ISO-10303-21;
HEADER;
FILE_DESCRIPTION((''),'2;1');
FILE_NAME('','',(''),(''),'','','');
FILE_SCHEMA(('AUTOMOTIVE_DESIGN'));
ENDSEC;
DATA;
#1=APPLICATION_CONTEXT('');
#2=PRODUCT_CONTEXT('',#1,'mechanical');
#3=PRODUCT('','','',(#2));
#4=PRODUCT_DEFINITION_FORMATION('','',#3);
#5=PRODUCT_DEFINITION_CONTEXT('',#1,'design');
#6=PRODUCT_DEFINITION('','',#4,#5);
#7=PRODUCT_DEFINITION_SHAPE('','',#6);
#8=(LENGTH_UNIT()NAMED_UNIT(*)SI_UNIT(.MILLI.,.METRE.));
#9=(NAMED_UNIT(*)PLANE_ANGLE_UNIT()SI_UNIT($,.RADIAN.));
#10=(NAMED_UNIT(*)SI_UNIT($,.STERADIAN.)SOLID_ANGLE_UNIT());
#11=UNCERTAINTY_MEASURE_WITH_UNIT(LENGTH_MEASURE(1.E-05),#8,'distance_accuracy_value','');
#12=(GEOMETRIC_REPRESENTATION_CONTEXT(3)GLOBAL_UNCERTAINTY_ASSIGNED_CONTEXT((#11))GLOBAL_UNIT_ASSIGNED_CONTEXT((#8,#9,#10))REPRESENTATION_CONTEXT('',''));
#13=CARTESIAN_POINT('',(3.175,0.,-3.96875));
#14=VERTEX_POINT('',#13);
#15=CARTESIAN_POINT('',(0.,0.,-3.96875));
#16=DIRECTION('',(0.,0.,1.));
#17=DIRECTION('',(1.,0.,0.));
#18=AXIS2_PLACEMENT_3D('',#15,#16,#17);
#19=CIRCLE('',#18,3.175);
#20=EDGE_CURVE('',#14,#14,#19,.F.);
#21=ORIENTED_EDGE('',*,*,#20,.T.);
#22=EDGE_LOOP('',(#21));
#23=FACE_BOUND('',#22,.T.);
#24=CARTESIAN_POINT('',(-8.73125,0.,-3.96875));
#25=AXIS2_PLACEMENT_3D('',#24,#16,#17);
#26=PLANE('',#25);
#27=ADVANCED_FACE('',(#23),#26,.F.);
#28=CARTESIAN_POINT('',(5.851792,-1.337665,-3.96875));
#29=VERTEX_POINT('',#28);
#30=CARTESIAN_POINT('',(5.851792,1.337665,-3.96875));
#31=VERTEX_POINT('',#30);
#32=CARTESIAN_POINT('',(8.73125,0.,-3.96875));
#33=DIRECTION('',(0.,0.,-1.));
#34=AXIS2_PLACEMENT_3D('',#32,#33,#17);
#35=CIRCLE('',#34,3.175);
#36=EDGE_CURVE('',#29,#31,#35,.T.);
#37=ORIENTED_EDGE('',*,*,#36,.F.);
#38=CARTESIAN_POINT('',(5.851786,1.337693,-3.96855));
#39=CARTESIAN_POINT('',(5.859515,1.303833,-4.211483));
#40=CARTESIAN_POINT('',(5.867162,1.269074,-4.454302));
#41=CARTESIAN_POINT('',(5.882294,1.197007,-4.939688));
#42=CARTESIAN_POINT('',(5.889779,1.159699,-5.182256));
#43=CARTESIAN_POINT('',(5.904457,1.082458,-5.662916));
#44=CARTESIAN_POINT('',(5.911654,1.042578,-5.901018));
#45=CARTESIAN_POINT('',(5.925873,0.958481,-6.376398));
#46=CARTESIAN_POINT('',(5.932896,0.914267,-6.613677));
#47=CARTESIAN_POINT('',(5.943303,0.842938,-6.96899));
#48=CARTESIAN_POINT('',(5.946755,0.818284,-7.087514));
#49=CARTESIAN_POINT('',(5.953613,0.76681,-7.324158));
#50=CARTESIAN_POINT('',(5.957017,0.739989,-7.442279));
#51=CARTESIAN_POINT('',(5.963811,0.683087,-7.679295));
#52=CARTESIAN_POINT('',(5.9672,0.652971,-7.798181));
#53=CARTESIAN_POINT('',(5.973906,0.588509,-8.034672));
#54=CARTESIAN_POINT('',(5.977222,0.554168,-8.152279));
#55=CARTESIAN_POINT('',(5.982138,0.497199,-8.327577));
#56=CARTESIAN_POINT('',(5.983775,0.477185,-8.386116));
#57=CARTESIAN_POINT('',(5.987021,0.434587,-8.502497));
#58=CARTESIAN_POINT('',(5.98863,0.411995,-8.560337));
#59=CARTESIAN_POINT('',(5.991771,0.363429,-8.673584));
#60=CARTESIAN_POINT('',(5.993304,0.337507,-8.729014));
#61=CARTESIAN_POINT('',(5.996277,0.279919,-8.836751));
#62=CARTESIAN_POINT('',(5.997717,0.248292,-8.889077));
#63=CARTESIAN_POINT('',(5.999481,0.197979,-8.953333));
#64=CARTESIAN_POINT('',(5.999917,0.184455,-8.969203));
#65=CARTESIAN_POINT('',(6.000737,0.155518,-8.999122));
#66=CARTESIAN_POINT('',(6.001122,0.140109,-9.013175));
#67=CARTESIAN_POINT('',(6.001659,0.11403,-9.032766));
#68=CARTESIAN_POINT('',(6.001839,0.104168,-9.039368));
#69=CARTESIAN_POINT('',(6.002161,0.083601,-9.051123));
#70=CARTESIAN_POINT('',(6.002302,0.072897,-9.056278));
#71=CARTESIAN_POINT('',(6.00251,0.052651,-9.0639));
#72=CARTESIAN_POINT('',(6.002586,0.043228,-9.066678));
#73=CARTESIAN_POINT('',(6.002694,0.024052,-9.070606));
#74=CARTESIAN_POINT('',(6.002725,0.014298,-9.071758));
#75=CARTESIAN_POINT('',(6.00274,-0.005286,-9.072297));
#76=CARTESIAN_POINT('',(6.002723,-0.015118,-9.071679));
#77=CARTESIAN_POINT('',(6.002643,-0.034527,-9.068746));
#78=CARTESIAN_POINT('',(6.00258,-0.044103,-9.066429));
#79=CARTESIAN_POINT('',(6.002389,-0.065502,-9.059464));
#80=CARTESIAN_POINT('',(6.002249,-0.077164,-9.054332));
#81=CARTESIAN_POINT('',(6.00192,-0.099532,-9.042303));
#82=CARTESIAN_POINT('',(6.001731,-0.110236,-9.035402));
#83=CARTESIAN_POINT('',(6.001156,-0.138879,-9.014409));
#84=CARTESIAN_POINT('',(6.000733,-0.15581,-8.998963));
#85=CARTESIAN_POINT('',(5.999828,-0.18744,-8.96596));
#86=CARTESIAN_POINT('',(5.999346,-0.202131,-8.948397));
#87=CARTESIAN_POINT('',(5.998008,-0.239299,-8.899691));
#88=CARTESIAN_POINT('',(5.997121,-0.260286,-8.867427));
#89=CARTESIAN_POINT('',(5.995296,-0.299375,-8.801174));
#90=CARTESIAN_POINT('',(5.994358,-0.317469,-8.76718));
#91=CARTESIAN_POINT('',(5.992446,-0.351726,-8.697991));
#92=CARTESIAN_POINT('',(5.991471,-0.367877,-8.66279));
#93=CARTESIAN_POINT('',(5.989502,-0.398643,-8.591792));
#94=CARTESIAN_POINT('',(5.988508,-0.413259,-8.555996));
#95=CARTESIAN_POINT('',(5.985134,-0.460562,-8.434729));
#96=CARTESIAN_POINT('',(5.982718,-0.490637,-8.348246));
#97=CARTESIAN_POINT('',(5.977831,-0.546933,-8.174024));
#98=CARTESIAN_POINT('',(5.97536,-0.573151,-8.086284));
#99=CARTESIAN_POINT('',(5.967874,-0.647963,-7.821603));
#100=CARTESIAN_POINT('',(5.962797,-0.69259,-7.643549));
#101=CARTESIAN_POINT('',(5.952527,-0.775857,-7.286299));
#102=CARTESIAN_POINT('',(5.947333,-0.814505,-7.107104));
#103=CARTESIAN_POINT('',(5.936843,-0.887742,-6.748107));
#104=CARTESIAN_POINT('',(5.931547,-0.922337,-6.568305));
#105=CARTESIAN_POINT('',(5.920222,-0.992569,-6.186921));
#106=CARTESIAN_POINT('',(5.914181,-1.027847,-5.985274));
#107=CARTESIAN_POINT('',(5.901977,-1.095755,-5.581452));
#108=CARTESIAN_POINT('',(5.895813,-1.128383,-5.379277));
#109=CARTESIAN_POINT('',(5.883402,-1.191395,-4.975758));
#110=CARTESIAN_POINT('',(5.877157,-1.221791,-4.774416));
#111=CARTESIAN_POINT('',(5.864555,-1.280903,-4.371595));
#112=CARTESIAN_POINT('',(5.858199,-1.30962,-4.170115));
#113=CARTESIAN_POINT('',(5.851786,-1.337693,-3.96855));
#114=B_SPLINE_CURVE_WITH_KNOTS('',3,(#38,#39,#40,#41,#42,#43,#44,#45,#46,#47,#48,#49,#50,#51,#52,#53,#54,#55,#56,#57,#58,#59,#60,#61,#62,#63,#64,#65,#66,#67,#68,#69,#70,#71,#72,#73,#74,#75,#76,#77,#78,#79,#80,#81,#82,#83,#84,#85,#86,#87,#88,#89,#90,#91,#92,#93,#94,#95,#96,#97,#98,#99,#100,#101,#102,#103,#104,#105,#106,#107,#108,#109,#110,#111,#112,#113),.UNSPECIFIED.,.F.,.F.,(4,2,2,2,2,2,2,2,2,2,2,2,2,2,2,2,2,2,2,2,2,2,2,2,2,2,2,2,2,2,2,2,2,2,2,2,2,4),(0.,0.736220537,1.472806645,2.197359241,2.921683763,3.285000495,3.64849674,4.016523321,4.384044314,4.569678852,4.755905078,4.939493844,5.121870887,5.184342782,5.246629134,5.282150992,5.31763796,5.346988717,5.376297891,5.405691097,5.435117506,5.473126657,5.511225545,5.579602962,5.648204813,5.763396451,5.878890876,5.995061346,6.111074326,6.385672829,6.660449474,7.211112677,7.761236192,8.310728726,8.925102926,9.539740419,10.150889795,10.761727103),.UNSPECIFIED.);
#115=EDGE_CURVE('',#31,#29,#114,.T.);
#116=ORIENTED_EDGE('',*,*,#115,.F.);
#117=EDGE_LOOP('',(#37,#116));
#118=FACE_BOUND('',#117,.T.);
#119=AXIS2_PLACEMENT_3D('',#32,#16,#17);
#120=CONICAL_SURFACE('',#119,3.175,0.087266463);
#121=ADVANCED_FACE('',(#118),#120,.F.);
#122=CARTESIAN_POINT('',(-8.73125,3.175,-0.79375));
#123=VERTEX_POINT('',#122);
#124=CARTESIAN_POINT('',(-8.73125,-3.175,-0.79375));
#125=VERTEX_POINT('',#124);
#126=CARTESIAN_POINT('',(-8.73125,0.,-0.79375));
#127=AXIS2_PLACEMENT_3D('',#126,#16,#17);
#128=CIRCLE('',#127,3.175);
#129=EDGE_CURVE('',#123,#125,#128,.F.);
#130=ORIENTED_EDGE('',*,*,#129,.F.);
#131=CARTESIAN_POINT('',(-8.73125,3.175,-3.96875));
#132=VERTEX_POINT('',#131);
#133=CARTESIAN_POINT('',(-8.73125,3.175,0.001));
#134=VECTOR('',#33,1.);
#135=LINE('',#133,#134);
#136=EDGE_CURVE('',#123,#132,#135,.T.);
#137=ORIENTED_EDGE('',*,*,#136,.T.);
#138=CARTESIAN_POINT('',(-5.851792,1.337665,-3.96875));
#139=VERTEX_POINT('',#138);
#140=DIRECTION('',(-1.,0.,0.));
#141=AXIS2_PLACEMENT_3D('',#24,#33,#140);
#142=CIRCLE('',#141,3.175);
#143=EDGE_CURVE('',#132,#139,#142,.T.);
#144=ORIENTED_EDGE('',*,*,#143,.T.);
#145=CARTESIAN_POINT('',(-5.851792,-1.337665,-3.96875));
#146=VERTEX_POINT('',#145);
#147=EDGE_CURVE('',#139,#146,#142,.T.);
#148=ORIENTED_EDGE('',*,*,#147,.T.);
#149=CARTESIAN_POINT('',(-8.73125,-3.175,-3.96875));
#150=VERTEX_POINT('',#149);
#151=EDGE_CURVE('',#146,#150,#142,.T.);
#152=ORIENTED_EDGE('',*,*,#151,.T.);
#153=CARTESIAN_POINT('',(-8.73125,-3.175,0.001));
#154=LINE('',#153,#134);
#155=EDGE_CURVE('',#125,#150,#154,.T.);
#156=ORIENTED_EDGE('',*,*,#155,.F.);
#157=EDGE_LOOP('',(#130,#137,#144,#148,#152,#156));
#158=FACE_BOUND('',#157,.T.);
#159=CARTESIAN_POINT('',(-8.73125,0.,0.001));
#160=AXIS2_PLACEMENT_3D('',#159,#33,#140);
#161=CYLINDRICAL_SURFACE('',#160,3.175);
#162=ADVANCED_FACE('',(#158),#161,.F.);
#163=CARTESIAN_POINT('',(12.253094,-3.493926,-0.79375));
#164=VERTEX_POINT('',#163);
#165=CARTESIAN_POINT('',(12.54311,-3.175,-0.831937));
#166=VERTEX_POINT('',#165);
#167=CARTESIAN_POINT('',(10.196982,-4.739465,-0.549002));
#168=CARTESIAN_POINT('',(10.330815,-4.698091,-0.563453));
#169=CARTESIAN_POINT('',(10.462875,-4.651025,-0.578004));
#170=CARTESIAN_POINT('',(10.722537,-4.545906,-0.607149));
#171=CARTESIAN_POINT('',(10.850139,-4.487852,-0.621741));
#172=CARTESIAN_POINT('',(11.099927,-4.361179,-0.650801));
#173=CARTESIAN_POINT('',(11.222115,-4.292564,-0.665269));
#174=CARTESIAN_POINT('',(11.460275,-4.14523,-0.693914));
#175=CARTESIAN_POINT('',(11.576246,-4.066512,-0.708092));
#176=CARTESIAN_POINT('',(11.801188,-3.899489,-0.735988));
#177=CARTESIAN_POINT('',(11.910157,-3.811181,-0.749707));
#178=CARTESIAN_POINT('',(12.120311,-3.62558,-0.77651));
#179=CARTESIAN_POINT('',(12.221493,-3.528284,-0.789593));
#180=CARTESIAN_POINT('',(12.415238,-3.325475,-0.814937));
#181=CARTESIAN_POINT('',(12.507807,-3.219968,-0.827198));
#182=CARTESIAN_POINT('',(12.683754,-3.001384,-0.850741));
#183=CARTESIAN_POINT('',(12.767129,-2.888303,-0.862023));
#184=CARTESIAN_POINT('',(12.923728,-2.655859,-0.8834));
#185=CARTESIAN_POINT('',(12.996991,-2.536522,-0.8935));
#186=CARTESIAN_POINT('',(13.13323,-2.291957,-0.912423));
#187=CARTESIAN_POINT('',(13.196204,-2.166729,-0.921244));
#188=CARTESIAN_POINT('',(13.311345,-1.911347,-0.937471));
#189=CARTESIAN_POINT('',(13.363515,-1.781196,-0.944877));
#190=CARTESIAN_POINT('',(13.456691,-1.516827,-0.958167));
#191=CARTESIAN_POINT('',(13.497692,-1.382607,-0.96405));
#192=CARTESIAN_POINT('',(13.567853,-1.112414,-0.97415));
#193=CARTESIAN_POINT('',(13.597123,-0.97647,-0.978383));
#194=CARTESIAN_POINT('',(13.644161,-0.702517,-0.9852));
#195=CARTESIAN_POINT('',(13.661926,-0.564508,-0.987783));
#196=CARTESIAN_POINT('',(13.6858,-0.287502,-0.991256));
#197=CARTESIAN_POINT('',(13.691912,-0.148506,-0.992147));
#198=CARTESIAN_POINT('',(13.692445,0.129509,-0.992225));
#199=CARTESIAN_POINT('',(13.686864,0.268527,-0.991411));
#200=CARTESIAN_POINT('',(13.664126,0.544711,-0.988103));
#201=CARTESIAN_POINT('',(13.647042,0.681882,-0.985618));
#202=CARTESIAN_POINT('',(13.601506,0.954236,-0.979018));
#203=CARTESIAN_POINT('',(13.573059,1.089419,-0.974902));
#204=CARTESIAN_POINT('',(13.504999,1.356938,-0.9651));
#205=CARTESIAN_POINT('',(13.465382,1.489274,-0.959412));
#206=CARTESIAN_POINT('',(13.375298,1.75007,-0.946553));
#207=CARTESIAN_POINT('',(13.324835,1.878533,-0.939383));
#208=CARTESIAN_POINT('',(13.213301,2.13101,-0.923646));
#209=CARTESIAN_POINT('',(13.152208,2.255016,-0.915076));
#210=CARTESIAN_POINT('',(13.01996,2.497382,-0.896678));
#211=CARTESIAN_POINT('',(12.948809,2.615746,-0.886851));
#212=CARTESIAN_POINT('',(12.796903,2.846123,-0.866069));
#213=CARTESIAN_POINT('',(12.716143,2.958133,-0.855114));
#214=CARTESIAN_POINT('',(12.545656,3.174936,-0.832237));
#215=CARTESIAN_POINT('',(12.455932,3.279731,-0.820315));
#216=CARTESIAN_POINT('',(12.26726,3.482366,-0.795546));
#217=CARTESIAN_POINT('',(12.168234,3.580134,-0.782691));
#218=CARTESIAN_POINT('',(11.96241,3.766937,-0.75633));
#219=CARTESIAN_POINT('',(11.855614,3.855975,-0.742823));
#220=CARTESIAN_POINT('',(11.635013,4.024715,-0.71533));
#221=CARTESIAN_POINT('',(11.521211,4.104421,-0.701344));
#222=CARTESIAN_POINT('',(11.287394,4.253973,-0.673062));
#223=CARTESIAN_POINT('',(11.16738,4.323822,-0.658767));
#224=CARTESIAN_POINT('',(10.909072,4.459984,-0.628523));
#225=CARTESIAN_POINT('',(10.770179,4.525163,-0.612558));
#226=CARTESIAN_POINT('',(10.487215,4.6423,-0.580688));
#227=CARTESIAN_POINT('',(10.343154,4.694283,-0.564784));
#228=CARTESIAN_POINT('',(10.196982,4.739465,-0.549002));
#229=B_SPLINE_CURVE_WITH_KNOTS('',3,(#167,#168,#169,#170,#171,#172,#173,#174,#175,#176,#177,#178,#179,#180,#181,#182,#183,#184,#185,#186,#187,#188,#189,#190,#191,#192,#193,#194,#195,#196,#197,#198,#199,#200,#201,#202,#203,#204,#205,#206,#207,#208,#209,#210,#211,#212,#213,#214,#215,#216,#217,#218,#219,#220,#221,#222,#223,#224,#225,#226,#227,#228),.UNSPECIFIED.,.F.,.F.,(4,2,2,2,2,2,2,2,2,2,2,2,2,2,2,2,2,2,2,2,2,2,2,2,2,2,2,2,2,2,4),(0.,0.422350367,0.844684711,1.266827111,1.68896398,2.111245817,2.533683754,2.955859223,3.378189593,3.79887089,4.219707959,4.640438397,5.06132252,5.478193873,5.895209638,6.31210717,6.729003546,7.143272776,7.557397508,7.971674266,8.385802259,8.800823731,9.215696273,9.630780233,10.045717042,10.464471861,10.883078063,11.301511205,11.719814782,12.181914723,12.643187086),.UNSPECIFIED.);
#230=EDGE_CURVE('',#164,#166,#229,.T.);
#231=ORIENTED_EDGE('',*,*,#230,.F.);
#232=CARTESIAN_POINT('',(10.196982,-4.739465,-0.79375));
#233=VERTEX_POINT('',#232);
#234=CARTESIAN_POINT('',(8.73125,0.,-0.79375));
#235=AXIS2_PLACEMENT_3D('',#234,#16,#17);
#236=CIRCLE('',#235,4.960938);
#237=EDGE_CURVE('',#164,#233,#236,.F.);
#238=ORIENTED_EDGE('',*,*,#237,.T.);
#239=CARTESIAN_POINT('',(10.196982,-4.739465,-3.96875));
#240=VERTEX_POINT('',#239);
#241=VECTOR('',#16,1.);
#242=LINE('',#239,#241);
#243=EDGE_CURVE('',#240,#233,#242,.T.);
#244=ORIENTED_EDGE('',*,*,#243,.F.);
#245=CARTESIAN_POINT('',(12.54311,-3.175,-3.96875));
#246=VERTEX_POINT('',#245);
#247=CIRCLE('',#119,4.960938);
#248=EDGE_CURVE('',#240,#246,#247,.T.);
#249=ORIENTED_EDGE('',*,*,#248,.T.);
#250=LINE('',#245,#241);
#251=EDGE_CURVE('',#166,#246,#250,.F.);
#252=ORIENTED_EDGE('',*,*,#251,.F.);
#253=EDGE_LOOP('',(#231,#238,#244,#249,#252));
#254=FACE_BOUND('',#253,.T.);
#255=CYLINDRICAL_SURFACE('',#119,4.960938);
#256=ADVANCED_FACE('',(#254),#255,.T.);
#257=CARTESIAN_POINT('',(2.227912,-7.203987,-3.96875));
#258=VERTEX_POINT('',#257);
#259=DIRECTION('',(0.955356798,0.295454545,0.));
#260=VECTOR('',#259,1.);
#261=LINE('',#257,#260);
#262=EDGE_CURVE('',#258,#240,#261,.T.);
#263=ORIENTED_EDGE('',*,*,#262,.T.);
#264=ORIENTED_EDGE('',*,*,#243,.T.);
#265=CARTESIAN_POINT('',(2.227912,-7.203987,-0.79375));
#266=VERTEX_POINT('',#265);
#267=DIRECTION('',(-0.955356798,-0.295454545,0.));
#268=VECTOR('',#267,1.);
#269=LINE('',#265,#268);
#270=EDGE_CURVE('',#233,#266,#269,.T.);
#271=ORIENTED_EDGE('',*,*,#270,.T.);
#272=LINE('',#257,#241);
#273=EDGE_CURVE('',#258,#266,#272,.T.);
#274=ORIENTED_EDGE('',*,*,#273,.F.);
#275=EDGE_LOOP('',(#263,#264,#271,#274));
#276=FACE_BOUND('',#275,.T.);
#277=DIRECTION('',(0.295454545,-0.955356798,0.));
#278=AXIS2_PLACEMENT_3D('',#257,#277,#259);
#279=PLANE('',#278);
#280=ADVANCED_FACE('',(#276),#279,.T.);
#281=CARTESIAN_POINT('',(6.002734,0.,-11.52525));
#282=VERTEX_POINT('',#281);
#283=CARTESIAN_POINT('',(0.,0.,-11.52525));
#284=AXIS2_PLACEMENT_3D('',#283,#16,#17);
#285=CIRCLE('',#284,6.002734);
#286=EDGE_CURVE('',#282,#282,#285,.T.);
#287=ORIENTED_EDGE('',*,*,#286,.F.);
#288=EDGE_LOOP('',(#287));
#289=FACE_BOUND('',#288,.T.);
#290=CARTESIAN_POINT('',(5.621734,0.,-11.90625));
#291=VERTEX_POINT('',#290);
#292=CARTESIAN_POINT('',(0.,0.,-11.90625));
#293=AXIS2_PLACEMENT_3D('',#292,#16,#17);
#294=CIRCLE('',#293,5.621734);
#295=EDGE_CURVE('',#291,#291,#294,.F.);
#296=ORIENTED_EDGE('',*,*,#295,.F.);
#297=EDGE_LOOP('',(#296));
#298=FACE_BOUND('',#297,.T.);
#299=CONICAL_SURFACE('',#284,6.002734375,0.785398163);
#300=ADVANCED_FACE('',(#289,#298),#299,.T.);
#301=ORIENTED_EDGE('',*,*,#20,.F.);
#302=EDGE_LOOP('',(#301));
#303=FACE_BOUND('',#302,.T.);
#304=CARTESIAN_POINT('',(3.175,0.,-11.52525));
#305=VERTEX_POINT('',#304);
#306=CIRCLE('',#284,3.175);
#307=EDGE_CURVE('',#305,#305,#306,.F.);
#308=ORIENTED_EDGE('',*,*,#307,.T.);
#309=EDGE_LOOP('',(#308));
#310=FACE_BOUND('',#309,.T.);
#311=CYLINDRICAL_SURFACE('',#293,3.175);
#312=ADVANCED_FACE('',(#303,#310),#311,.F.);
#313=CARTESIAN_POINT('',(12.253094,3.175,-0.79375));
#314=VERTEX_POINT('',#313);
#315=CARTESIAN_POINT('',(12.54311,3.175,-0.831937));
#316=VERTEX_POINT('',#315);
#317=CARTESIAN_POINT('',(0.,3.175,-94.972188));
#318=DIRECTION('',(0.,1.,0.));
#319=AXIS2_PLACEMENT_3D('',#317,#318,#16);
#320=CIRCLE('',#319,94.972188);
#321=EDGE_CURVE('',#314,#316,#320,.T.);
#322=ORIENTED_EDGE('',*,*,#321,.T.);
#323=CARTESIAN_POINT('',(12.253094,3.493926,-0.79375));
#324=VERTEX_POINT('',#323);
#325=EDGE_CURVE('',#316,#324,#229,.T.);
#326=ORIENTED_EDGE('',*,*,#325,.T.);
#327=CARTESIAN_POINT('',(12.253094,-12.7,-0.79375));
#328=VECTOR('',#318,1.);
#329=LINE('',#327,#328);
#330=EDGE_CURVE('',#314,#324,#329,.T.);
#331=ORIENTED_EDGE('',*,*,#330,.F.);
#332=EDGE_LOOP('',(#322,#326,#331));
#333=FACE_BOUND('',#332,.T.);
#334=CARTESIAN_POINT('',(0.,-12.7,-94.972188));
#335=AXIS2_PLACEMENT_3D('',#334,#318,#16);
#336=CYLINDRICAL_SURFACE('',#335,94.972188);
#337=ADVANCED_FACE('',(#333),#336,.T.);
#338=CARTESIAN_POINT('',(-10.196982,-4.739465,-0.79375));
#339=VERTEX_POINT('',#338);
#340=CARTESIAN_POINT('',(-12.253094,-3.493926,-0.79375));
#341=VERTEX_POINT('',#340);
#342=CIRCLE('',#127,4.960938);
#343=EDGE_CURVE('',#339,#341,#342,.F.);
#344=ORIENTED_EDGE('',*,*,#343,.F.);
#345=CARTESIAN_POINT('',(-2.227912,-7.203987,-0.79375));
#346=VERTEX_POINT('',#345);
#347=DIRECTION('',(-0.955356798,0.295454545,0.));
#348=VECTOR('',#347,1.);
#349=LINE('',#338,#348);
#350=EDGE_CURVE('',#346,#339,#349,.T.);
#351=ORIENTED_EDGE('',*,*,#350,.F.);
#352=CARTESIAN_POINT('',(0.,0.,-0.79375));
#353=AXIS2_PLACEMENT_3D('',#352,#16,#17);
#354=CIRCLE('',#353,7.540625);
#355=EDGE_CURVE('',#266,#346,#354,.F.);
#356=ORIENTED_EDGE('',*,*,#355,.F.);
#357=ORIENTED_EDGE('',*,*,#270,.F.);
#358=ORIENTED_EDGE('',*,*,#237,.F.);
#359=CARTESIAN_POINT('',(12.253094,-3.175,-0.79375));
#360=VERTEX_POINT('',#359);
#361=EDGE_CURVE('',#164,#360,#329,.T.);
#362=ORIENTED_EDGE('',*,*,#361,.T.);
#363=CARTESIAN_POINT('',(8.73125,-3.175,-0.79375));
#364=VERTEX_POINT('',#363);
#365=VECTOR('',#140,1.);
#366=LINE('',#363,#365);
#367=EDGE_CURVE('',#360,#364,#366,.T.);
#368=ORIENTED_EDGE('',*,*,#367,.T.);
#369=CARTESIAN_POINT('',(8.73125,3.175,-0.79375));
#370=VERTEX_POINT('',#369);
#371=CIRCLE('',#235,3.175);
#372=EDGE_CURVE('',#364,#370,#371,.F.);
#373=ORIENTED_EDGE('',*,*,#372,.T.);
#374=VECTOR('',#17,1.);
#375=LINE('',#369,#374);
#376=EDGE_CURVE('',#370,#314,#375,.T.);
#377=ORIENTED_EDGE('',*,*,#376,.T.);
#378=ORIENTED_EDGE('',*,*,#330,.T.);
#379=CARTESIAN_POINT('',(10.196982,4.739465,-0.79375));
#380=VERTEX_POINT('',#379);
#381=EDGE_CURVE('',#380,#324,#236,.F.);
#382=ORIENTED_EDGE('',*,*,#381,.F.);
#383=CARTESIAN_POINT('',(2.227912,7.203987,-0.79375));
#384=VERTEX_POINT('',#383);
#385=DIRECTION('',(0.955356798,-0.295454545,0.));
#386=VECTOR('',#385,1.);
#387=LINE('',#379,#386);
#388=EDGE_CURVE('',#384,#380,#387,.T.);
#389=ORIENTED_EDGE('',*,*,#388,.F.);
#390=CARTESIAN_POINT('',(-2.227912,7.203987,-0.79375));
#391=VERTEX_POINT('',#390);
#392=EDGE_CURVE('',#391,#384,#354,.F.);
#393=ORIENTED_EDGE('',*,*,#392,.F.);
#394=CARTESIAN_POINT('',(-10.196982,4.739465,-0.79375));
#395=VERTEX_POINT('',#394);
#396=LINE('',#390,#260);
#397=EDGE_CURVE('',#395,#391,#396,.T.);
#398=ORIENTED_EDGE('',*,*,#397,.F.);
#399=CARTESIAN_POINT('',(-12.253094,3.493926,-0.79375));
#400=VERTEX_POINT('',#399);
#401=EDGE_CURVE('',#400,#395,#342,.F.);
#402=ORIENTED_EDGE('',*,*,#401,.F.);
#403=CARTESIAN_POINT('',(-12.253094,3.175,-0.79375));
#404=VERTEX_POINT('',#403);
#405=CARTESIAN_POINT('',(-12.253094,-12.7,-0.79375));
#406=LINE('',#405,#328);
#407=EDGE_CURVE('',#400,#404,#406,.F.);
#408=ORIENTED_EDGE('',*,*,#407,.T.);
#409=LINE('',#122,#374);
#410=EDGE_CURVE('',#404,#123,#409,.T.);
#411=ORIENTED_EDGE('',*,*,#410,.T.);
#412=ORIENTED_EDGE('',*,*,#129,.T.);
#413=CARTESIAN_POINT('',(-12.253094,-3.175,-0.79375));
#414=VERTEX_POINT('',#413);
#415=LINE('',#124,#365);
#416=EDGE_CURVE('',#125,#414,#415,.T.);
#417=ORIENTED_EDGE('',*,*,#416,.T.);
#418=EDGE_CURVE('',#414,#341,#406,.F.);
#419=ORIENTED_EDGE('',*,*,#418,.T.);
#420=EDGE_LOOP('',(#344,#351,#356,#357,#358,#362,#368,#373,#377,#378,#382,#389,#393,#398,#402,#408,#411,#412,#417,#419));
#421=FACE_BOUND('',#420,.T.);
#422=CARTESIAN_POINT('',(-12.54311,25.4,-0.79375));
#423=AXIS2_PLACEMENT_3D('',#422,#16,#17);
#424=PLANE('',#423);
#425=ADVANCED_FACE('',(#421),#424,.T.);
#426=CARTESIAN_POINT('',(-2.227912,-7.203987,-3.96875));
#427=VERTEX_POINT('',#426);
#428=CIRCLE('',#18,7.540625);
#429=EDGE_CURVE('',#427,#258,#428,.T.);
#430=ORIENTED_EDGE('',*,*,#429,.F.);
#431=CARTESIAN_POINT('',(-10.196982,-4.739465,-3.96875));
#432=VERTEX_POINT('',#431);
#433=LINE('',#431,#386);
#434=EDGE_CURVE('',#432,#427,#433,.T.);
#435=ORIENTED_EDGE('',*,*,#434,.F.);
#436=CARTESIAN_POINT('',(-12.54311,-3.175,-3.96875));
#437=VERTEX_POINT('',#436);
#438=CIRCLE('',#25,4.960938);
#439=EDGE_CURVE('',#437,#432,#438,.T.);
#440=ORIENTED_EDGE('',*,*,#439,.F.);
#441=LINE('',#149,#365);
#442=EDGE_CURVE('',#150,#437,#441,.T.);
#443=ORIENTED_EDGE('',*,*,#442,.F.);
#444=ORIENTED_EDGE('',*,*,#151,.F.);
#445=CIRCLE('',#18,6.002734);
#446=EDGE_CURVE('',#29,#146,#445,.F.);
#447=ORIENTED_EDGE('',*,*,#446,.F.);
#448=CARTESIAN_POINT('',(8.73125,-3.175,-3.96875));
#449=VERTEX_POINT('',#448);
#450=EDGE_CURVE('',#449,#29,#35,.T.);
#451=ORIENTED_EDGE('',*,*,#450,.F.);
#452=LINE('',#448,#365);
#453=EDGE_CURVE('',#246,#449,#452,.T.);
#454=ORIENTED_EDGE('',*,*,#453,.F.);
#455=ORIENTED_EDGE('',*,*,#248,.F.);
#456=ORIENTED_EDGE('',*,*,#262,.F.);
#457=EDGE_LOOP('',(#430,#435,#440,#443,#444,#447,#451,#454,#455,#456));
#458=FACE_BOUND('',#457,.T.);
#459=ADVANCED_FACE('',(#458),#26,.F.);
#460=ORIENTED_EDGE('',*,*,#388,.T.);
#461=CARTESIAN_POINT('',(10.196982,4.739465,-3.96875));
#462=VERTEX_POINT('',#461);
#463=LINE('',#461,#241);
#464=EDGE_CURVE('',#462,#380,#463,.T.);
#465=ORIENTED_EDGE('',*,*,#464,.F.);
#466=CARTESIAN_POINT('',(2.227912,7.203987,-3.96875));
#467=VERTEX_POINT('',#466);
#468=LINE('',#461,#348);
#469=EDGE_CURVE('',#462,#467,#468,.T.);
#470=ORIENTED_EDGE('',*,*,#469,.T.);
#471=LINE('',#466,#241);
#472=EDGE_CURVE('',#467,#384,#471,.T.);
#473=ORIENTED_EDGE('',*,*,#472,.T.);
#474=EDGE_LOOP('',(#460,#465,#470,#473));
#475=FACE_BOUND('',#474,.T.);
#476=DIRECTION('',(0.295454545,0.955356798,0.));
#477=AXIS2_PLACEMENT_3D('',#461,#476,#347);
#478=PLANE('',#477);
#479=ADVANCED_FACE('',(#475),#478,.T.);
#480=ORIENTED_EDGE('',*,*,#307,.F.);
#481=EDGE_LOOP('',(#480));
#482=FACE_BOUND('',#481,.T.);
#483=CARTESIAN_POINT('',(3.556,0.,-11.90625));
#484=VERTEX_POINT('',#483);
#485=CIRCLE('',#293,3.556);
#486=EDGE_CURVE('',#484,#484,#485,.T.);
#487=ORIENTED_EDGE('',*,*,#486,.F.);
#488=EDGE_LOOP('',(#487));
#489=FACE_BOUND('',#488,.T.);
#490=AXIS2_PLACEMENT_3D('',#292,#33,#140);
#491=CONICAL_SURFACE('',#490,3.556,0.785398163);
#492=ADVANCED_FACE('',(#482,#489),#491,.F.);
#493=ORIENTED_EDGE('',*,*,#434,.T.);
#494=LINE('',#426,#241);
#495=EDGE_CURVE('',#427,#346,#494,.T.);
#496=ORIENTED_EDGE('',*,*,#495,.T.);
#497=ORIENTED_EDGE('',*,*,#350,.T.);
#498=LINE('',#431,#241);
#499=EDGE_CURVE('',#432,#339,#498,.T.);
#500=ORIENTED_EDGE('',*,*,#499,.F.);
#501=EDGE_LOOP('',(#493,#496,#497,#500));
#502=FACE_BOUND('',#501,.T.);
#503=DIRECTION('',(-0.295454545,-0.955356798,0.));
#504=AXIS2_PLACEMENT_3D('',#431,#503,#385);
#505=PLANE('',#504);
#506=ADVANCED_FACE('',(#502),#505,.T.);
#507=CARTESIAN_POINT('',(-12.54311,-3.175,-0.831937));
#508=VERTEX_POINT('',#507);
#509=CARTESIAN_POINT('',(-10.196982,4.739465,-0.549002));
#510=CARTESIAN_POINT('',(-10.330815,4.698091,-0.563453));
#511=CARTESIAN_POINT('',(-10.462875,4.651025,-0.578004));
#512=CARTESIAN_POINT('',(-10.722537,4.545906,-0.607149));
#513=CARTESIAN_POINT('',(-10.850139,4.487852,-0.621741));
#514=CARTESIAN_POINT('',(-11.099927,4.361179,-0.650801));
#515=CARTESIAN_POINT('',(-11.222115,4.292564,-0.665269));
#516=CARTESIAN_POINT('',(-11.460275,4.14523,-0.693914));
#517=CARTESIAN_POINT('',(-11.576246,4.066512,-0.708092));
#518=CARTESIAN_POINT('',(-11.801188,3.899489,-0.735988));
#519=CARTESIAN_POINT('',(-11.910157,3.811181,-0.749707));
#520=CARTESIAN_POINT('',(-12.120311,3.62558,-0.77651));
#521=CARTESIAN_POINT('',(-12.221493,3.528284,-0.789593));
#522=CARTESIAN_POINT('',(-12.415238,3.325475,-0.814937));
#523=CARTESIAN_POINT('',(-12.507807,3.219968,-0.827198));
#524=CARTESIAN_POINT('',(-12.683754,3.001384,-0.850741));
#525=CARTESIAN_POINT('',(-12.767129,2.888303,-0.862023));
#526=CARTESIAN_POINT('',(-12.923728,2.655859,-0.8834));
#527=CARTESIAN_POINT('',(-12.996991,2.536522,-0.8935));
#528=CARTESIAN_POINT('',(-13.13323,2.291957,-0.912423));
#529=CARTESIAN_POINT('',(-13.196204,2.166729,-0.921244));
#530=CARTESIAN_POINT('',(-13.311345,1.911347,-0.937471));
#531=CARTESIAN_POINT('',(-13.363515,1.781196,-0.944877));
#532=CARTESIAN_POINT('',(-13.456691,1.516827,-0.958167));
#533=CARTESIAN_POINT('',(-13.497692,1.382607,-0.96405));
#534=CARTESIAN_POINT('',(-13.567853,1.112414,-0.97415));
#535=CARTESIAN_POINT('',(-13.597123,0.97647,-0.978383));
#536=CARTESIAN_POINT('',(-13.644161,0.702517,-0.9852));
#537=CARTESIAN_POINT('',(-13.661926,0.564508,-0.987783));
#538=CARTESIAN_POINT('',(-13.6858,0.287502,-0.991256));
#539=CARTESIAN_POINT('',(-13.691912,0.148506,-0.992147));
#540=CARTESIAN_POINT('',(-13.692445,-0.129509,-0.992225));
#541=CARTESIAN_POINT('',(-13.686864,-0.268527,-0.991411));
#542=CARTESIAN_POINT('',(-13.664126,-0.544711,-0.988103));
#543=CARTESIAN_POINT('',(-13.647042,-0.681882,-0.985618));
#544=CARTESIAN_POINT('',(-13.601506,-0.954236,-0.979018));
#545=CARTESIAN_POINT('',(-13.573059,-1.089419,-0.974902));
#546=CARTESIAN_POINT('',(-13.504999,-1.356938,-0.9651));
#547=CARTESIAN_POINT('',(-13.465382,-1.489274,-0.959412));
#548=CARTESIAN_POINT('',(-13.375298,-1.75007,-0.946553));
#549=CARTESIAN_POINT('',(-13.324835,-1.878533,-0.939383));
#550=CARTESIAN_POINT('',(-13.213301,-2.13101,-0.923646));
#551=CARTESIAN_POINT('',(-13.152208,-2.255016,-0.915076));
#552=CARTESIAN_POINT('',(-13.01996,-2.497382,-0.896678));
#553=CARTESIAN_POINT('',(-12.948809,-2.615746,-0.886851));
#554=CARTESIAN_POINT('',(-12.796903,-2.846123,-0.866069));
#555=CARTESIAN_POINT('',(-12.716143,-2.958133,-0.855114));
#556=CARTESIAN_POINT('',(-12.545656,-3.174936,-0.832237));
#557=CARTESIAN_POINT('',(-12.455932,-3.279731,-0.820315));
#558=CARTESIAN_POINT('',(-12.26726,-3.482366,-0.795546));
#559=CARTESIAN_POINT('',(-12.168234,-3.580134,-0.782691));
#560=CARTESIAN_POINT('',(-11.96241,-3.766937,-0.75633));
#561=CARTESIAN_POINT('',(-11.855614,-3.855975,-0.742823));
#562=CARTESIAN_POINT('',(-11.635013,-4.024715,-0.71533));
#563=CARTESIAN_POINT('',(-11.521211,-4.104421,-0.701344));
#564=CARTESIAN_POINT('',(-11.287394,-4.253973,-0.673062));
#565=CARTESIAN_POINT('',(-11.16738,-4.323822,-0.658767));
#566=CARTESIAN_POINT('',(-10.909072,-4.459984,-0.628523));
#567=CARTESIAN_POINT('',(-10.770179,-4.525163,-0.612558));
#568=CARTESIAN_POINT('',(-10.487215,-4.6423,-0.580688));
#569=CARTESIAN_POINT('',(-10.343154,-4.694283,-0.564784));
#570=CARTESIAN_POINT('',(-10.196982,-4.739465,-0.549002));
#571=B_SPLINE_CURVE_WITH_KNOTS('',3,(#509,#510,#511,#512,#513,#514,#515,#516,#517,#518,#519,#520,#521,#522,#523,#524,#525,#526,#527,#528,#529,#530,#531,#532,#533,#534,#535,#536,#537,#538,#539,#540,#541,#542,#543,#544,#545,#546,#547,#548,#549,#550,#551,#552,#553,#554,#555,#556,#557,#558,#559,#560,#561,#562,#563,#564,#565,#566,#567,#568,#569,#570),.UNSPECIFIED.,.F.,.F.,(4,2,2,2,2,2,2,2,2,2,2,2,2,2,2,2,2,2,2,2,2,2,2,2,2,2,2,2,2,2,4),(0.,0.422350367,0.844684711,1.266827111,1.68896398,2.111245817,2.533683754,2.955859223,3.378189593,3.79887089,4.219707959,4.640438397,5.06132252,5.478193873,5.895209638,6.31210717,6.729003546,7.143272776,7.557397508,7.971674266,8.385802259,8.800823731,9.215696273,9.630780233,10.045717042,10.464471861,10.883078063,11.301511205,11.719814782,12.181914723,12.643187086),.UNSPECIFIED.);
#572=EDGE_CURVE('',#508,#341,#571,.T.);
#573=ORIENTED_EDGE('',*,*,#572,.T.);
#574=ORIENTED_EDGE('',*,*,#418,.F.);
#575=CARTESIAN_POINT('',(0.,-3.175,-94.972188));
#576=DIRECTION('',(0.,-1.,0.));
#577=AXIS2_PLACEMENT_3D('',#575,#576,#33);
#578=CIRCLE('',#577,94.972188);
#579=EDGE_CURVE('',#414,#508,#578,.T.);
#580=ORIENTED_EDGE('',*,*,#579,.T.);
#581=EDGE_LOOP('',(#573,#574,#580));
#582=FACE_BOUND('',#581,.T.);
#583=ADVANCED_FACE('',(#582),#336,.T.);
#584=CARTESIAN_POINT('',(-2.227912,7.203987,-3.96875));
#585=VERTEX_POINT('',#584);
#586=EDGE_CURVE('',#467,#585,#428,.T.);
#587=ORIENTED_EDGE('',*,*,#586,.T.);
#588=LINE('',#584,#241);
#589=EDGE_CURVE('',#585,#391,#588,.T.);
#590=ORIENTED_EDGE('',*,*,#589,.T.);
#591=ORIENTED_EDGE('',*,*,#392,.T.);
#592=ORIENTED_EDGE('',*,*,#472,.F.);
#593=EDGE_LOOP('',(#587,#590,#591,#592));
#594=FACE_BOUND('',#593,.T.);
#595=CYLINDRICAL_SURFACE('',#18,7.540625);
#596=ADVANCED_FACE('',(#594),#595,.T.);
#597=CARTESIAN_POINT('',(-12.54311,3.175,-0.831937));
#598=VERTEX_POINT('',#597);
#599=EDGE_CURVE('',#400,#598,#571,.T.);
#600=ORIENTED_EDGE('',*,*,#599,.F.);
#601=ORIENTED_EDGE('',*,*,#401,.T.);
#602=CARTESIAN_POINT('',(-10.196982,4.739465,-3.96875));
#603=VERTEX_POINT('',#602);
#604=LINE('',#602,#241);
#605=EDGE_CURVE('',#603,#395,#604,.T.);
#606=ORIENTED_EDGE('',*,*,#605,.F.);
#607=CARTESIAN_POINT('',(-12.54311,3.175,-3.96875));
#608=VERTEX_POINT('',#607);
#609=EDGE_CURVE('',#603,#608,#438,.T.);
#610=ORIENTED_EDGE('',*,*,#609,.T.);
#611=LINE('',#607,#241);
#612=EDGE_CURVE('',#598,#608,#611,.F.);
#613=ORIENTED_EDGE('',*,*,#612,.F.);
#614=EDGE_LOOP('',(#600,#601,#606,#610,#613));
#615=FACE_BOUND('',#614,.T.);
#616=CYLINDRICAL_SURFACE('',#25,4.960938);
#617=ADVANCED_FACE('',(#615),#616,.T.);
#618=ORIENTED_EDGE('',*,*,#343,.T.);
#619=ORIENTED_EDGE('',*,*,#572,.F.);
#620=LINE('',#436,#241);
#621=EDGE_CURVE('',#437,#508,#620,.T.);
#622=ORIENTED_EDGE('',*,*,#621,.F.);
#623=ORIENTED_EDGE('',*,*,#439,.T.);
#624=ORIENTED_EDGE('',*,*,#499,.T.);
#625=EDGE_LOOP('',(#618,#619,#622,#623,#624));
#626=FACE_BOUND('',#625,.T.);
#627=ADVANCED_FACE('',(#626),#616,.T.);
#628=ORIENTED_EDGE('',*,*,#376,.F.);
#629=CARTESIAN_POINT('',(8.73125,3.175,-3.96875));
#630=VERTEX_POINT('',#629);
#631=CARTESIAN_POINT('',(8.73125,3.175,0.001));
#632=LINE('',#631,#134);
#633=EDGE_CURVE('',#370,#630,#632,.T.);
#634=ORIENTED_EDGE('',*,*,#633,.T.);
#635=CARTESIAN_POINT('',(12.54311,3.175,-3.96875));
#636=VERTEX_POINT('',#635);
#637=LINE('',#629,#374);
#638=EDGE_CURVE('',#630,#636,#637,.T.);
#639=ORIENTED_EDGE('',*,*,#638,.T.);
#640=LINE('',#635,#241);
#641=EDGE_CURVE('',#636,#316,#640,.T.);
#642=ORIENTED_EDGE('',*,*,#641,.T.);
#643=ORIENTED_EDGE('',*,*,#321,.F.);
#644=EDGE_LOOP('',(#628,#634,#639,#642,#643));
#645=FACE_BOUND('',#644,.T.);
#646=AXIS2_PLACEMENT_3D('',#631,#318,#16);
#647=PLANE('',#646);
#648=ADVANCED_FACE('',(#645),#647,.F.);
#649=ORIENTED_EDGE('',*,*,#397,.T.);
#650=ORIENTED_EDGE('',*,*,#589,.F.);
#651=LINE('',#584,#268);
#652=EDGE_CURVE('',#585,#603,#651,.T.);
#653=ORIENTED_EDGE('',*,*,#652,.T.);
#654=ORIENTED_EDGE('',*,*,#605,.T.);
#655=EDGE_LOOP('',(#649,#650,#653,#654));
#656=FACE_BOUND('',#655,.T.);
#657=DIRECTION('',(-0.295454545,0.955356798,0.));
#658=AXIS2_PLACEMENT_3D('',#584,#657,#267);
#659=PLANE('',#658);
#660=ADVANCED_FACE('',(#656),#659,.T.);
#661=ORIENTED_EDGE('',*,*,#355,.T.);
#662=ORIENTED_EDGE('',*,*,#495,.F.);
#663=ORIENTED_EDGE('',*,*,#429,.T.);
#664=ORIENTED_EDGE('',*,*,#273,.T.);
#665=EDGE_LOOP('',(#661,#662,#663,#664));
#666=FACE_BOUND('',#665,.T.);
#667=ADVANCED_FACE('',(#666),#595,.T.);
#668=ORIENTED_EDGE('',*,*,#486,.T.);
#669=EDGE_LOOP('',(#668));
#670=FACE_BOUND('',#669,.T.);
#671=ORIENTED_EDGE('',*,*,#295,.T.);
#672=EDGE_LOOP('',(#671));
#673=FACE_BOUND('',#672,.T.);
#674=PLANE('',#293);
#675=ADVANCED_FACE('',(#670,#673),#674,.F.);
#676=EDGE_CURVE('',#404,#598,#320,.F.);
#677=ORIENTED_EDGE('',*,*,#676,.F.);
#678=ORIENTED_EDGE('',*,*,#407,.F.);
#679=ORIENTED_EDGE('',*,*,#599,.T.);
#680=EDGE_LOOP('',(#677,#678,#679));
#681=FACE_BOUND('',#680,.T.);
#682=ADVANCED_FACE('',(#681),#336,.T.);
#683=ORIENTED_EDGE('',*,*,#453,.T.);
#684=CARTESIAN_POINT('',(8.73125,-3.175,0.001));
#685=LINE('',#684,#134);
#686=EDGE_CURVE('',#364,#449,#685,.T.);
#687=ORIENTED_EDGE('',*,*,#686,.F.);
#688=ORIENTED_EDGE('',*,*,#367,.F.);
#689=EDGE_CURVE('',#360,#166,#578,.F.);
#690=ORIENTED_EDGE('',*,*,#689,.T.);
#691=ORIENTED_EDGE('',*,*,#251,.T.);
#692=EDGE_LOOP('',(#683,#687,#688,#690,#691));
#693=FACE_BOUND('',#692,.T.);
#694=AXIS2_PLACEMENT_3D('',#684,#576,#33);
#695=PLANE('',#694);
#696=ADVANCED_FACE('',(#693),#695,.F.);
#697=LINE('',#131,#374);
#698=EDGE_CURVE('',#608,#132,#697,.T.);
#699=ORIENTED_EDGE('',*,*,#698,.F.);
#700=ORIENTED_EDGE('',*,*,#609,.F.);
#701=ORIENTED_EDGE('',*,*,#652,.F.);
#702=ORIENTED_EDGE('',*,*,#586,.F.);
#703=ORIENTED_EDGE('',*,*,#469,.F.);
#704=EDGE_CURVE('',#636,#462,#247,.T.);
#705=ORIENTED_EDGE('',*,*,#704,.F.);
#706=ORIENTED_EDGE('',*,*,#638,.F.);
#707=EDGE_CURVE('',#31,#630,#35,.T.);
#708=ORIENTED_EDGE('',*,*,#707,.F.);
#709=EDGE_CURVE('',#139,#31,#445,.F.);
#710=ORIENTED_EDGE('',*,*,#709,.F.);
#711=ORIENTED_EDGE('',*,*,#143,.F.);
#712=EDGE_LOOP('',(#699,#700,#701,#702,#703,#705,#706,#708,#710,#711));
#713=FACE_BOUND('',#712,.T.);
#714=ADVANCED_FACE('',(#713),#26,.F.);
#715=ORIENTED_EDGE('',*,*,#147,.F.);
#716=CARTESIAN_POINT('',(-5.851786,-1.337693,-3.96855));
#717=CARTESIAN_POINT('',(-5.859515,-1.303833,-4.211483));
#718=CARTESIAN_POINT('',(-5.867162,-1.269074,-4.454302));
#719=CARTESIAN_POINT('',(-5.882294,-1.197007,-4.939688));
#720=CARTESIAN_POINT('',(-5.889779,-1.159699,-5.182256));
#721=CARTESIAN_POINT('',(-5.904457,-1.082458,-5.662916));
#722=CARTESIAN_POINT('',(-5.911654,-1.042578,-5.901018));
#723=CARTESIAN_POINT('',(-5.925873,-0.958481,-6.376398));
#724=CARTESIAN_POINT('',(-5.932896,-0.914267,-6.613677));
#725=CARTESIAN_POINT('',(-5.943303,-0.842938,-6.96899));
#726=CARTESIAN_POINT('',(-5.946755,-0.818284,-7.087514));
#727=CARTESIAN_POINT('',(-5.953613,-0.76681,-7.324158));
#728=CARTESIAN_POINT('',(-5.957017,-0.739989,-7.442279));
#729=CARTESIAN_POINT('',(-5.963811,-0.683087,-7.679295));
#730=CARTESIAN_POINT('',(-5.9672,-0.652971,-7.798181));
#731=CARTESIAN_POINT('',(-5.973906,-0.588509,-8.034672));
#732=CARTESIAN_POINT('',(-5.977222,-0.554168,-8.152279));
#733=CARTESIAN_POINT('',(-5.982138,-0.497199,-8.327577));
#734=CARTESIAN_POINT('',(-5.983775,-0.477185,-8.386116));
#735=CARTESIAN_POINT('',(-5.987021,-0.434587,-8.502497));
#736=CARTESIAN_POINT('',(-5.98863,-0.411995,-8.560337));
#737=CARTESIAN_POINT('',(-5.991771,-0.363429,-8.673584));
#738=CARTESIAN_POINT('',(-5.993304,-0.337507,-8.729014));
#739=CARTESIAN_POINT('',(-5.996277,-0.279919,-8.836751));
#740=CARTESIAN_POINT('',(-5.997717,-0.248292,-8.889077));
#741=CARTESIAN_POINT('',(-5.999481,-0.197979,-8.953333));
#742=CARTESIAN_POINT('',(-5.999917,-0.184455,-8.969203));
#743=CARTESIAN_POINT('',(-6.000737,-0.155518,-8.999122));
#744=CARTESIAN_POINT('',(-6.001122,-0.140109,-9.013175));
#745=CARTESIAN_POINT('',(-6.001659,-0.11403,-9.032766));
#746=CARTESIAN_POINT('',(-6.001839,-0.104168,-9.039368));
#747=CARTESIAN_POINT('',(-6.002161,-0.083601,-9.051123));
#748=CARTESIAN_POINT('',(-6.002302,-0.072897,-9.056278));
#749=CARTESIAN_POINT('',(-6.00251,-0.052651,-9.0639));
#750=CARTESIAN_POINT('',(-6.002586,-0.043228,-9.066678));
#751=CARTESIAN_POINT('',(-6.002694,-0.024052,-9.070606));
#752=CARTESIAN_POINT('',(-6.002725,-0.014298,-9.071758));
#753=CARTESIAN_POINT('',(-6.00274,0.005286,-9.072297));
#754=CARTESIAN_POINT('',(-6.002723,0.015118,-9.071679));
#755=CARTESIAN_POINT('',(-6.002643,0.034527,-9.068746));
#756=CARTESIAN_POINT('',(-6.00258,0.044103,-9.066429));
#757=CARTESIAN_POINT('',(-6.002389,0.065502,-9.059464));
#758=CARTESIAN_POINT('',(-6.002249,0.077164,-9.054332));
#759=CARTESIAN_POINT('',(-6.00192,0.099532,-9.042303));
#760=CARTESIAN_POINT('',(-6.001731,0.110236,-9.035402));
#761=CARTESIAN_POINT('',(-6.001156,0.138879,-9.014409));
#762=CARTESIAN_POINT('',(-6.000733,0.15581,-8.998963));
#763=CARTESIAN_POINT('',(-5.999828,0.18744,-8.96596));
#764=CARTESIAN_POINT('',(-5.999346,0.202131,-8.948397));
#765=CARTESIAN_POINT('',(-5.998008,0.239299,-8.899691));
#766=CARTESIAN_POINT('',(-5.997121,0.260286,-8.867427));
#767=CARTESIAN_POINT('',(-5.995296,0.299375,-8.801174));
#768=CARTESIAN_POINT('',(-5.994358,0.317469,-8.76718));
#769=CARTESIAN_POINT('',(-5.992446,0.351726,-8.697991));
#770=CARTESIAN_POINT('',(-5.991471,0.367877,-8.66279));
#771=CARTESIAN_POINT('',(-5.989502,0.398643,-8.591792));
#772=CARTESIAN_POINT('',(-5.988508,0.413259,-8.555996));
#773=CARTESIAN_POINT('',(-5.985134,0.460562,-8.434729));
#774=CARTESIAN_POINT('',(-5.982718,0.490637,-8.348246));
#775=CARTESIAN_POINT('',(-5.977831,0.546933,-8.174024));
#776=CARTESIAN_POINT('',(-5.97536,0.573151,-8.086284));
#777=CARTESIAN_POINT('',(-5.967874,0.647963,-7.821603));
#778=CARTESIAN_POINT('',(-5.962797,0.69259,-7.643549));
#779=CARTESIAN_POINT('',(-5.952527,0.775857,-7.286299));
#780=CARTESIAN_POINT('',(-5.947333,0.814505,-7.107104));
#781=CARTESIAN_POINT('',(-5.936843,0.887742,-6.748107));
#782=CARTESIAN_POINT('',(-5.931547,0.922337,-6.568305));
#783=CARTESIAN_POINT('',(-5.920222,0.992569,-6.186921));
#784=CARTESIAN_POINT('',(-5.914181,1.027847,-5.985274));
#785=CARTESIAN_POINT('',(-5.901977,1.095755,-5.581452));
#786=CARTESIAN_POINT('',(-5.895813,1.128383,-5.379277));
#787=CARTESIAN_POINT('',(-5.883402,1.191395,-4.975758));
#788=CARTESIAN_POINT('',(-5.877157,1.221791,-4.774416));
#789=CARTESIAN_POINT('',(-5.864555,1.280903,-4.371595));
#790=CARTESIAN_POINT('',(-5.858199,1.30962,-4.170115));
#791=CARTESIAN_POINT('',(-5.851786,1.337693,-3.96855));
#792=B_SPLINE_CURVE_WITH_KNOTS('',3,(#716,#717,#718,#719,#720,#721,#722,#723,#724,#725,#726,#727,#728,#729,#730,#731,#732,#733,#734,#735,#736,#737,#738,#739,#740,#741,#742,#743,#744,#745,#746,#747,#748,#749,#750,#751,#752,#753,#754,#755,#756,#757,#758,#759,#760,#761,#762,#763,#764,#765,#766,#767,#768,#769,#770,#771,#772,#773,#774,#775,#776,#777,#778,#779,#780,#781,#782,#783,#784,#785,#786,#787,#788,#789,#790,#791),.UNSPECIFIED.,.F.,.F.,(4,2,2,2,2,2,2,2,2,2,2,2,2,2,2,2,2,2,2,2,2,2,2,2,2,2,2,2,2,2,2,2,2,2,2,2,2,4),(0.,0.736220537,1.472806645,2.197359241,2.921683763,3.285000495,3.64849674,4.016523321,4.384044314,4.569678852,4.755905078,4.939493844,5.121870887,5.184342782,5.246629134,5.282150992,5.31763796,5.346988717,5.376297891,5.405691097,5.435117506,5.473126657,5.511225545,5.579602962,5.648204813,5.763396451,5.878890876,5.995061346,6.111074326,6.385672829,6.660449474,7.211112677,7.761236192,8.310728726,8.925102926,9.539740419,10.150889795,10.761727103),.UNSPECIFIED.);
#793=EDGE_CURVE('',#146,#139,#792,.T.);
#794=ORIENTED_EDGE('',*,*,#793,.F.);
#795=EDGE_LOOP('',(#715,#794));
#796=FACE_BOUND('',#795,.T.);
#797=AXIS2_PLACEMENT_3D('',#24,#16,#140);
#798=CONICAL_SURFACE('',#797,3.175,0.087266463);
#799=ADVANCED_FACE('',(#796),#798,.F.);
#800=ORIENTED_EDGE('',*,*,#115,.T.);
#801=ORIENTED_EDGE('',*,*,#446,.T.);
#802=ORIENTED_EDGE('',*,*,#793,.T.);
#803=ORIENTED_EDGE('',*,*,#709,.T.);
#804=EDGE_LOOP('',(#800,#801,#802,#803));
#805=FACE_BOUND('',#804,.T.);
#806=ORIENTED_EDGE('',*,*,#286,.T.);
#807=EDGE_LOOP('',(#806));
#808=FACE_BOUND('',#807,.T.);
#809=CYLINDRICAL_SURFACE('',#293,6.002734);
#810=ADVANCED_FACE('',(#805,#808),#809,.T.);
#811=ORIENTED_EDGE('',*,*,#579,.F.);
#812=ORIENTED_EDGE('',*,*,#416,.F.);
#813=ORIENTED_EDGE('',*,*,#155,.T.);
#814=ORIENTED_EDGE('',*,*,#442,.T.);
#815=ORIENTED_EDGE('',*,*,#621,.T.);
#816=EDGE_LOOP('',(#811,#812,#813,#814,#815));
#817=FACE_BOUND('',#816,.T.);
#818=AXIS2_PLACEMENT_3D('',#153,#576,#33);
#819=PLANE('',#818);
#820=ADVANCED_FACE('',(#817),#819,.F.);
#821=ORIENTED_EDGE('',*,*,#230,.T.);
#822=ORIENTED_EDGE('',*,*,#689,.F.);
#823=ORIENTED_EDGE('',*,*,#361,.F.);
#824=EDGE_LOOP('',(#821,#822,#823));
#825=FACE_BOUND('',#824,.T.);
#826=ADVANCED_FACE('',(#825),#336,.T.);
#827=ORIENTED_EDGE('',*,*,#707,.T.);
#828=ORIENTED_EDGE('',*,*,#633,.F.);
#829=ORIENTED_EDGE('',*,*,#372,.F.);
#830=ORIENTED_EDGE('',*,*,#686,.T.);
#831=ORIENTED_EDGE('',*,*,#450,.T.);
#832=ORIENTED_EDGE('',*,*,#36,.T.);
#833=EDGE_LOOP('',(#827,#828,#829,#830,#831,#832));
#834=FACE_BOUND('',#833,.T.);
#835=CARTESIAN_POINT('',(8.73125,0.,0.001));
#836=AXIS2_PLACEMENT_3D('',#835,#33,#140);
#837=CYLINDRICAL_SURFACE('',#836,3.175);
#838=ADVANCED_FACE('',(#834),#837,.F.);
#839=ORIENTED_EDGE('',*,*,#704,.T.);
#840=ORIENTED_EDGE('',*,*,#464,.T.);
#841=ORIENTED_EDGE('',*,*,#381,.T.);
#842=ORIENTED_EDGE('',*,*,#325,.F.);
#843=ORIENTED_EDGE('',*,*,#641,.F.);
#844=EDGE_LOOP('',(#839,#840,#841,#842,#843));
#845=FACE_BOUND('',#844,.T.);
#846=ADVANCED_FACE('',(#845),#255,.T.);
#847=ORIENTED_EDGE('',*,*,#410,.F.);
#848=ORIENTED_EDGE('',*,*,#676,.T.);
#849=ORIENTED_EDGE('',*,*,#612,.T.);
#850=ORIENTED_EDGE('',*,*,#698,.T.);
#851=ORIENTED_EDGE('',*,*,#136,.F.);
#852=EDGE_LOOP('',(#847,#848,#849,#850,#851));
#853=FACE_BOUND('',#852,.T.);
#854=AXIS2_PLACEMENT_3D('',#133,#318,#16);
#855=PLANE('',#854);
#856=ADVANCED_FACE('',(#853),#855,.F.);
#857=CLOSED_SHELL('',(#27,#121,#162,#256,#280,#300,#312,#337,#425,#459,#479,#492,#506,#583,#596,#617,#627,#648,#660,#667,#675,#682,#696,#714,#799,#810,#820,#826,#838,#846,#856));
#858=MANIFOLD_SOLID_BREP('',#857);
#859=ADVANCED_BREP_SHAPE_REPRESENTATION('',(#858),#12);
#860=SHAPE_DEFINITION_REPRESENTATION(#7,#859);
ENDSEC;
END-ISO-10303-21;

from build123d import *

# Parameters (mm, degrees)
SKETCH2_R               = 6.002734375
SKETCH2_R_2             = 3.175
EXTRUDE1_DEPTH          = 11.90625
SKETCH3_R               = 1.7859375
EXTRUDE2_DEPTH          = 3.96875
CUT_EXTRUDE2_DEPTH      = 12.7
CHAMFER1_SIZE           = 0.381
CUT_EXTRUDE3_START      = -3.818600123
CUT_EXTRUDE3_OUTLINE_R  = 1.7859375
CUT_EXTRUDE3_DEPTH      = 3.818600123
CUT_EXTRUDE4_DEPTH      = 25.4
CUT_EXTRUDE4_DEPTH_BACK = 25.4
SKETCH7_W               = 25.086219796
SKETCH7_H               = 3.328995852


with BuildPart() as part:
    # Sketch2 → Extrude1 (new body)
    with BuildSketch(Plane.XY):
        Circle(SKETCH2_R)
        Circle(SKETCH2_R_2, mode=Mode.SUBTRACT)
    extrude(amount=-EXTRUDE1_DEPTH)

    # Sketch3 → Extrude2 (add)
    with BuildSketch(Plane.XY):
        with BuildLine():
            Line((-10.196981534, -4.739465365), (-2.227911932, -7.203987355))
            ThreePointArc((-2.227911932, -7.203987355), (0, -7.540625), (2.227911932, -7.203987355))
            Line((2.227911932, -7.203987355), (10.196981534, -4.739465365))
            ThreePointArc((10.196981534, -4.739465365), (13.6921875, 0), (10.196981534, 4.739465365))
            Line((10.196981534, 4.739465365), (2.227911932, 7.203987355))
            ThreePointArc((2.227911932, 7.203987355), (0, 7.540625), (-2.227911932, 7.203987355))
            Line((-2.227911932, 7.203987355), (-10.196981534, 4.739465365))
            ThreePointArc((-10.196981534, 4.739465365), (-13.6921875, 0), (-10.196981534, -4.739465365))
        make_face()
        with Locations((8.73125, 0)):
            Circle(SKETCH3_R, mode=Mode.SUBTRACT)
        with Locations((-8.73125, 0)):
            Circle(SKETCH3_R, mode=Mode.SUBTRACT)
    extrude(amount=-EXTRUDE2_DEPTH)

    # Cut-Extrude1 cone 1 section (through the dimple's axis) → Cut-Extrude1 (revolve, cut)
    with BuildSketch(Plane(origin=(8.73125, 0, 0), x_dir=(0, -1, 0), z_dir=(1, 0, 0))):
        Polygon((0, 0), (3.571875, 0), (0, 2.997158995), align=None)
    revolve(axis=Axis((8.73125, 0, 0), (0, 0, -1)), mode=Mode.SUBTRACT)

    # Cut-Extrude1 cone 2 section (through the dimple's axis) → Cut-Extrude1 cone 2 (revolve, cut)
    with BuildSketch(Plane(origin=(-8.73125, 0, 0), x_dir=(0, -1, 0), z_dir=(1, 0, 0))):
        Polygon((0, 0), (3.571875, 0), (0, 2.997158995), align=None)
    revolve(axis=Axis((-8.73125, 0, 0), (0, 0, -1)), mode=Mode.SUBTRACT)

    # Sketch5 → Cut-Extrude2 (cut, symmetric)
    with BuildSketch(Plane(origin=(0, 0, 0), x_dir=(1, 0, 0), z_dir=(0, 1, 0))):
        with BuildLine():
            Line((13.6921875, 0.9921875), (13.6921875, -0.635))
            Line((13.6921875, -0.635), (-13.6921875, -0.635))
            Line((-13.6921875, -0.635), (-13.6921875, 0.9921875))
            ThreePointArc((-13.6921875, 0.9921875), (0, 0), (13.6921875, 0.9921875))
        make_face()
    extrude(amount=CUT_EXTRUDE2_DEPTH, both=True, mode=Mode.SUBTRACT)

    # Chamfer1
    chamfer1_edges = [part.edges().sort_by_distance(p)[0] for p in [
        (-6.002734375, 0, -11.90625),
        (-3.175, 0, -11.90625),
    ]]
    chamfer(chamfer1_edges, length=CHAMFER1_SIZE)

    # Cut-Extrude3: read off the stored shape, not the designer's step
    # Cut-Extrude3 outline → Cut-Extrude3 (cut)
    # profile 1 of 2: a face of its own
    with BuildSketch(Plane(origin=(0, 0, -3.96875), x_dir=(-1, 0, 0), z_dir=(0, 0, -1)).offset(CUT_EXTRUDE3_START)):
        with BuildLine():
            ThreePointArc((-12.543109898, 3.175), (-13.6921875, 0), (-12.543109898, -3.175))
            Line((-12.543109898, -3.175), (-8.73125, -3.175))
            ThreePointArc((-8.73125, -3.175), (-5.55625, 0), (-8.73125, 3.175))
            Line((-8.73125, 3.175), (-12.543109898, 3.175))
        make_face()
        with Locations((-8.73125, 0)):
            Circle(CUT_EXTRUDE3_OUTLINE_R, mode=Mode.SUBTRACT)
    # profile 2 of 2: a face of its own
    with BuildSketch(Plane(origin=(0, 0, -3.96875), x_dir=(-1, 0, 0), z_dir=(0, 0, -1)).offset(CUT_EXTRUDE3_START)):
        with BuildLine():
            ThreePointArc((8.73125, 3.175), (5.55625, 0), (8.73125, -3.175))
            Line((8.73125, -3.175), (12.543109898, -3.175))
            ThreePointArc((12.543109898, -3.175), (13.6921875, 0), (12.543109898, 3.175))
            Line((12.543109898, 3.175), (8.73125, 3.175))
        make_face()
        with Locations((8.73125, 0)):
            Circle(CUT_EXTRUDE3_OUTLINE_R, mode=Mode.SUBTRACT)
    extrude(amount=CUT_EXTRUDE3_DEPTH, mode=Mode.SUBTRACT)

    # Cut-Extrude3 2 outline → Cut-Extrude3 2 (revolve, cut)
    with BuildSketch(Plane(origin=(8.73125, 0, 0), x_dir=(1, 0, 0), z_dir=(0, -1, 0))):
        Polygon((2.728509965, -3.968749996), (2.728509965, -9.072154448), (3.175, -3.968749996), align=None)
    revolve(axis=Axis((8.73125, 0, 0), (0, 0, 1)), mode=Mode.SUBTRACT)

    # Cut-Extrude3 3 outline → Cut-Extrude3 3 (revolve, cut)
    with BuildSketch(Plane(origin=(-8.73125, 0, 0), x_dir=(1, 0, 0), z_dir=(0, -1, 0))):
        Polygon((2.728515625, -3.968749996), (2.728515625, -9.07208976), (3.175, -3.968749996), align=None)
    revolve(axis=Axis((-8.73125, 0, 0), (0, 0, 1)), mode=Mode.SUBTRACT)

    # Sketch7 → Cut-Extrude4 (cut, two sides: drawn at the far end of the back side and taken through both)
    with BuildSketch(Plane(origin=(0, 0, 0), x_dir=(1, 0, 0), z_dir=(0, 1, 0)).offset(-CUT_EXTRUDE4_DEPTH_BACK)):
        with Locations((0, -0.870747926)):
            Rectangle(SKETCH7_W, SKETCH7_H)
    extrude(amount=CUT_EXTRUDE4_DEPTH + CUT_EXTRUDE4_DEPTH_BACK, mode=Mode.SUBTRACT)


solid = part.part
